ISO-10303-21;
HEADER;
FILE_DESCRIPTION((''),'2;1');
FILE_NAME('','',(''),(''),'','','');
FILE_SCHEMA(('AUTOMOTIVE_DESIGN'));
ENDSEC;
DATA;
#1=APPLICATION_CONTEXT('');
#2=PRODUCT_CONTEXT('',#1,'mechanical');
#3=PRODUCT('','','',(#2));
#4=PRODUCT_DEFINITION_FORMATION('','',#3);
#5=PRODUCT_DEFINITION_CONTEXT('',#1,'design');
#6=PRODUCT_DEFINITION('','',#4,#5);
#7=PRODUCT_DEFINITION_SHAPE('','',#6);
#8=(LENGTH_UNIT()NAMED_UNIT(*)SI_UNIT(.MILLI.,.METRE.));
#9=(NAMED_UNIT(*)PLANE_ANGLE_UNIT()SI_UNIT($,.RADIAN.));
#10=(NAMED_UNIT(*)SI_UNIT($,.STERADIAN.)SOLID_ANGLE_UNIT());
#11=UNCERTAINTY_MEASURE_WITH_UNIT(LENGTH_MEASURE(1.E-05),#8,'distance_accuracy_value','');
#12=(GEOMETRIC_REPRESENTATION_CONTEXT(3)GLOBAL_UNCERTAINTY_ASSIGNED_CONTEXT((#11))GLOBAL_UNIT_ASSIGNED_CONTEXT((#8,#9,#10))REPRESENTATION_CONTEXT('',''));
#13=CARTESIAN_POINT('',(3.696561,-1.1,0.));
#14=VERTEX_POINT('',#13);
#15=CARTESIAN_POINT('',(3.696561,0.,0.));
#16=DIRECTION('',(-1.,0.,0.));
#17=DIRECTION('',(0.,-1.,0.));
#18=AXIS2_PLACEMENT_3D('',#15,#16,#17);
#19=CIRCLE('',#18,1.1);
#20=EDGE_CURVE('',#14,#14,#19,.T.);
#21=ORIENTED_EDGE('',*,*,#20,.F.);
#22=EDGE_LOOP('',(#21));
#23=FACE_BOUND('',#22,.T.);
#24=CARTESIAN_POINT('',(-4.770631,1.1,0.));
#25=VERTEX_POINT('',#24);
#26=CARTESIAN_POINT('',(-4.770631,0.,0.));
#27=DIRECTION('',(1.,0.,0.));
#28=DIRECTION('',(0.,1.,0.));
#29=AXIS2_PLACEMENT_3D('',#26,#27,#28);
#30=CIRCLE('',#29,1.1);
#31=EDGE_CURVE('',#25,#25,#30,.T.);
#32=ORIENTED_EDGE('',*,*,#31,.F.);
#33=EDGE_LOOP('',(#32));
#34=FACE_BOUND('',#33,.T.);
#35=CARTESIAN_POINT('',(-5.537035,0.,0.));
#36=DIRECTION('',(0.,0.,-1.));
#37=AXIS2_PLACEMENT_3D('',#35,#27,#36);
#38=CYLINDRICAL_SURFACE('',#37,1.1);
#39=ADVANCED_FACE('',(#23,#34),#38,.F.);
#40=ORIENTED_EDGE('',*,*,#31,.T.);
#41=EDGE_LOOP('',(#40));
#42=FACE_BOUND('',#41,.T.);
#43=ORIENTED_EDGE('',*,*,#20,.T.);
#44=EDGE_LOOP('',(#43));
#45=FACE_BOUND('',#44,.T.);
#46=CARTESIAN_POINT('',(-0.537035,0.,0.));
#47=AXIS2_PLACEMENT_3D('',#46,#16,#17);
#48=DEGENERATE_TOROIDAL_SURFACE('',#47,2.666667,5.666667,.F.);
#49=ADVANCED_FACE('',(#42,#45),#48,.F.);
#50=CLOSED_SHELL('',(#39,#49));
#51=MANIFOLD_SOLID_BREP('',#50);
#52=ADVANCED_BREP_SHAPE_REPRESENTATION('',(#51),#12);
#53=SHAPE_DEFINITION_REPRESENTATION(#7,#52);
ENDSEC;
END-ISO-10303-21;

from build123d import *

# Parameters (mm, degrees)
INNER_START           = -5.537034875
INNER_LUMEN_OUTLINE_R = 1.1
INNER_LUMEN_DEPTH     = 10.0000002


# Read off the part's stored shape, not the designer's step: Inner Lumen
with BuildPart() as part:
    # Olive Tip → Revolve1 (revolve)
    with BuildSketch(Plane.XY):
        with BuildLine():
            Line((-5.537034775, 0), (4.462965225, 0))
            ThreePointArc((4.462965225, 0), (-0.537034775, -3), (-5.537034775, 0))
        make_face()
    revolve(axis=Axis((-5.537034775, 0, 0), (1, 0, 0)))

    # Inner Lumen outline → Inner Lumen (cut)
    with BuildSketch(Plane(origin=(0, 0, 0), x_dir=(0, 0, -1), z_dir=(1, 0, 0)).offset(INNER_START)):
        Circle(INNER_LUMEN_OUTLINE_R)
    extrude(amount=INNER_LUMEN_DEPTH, mode=Mode.SUBTRACT)


solid = part.part
